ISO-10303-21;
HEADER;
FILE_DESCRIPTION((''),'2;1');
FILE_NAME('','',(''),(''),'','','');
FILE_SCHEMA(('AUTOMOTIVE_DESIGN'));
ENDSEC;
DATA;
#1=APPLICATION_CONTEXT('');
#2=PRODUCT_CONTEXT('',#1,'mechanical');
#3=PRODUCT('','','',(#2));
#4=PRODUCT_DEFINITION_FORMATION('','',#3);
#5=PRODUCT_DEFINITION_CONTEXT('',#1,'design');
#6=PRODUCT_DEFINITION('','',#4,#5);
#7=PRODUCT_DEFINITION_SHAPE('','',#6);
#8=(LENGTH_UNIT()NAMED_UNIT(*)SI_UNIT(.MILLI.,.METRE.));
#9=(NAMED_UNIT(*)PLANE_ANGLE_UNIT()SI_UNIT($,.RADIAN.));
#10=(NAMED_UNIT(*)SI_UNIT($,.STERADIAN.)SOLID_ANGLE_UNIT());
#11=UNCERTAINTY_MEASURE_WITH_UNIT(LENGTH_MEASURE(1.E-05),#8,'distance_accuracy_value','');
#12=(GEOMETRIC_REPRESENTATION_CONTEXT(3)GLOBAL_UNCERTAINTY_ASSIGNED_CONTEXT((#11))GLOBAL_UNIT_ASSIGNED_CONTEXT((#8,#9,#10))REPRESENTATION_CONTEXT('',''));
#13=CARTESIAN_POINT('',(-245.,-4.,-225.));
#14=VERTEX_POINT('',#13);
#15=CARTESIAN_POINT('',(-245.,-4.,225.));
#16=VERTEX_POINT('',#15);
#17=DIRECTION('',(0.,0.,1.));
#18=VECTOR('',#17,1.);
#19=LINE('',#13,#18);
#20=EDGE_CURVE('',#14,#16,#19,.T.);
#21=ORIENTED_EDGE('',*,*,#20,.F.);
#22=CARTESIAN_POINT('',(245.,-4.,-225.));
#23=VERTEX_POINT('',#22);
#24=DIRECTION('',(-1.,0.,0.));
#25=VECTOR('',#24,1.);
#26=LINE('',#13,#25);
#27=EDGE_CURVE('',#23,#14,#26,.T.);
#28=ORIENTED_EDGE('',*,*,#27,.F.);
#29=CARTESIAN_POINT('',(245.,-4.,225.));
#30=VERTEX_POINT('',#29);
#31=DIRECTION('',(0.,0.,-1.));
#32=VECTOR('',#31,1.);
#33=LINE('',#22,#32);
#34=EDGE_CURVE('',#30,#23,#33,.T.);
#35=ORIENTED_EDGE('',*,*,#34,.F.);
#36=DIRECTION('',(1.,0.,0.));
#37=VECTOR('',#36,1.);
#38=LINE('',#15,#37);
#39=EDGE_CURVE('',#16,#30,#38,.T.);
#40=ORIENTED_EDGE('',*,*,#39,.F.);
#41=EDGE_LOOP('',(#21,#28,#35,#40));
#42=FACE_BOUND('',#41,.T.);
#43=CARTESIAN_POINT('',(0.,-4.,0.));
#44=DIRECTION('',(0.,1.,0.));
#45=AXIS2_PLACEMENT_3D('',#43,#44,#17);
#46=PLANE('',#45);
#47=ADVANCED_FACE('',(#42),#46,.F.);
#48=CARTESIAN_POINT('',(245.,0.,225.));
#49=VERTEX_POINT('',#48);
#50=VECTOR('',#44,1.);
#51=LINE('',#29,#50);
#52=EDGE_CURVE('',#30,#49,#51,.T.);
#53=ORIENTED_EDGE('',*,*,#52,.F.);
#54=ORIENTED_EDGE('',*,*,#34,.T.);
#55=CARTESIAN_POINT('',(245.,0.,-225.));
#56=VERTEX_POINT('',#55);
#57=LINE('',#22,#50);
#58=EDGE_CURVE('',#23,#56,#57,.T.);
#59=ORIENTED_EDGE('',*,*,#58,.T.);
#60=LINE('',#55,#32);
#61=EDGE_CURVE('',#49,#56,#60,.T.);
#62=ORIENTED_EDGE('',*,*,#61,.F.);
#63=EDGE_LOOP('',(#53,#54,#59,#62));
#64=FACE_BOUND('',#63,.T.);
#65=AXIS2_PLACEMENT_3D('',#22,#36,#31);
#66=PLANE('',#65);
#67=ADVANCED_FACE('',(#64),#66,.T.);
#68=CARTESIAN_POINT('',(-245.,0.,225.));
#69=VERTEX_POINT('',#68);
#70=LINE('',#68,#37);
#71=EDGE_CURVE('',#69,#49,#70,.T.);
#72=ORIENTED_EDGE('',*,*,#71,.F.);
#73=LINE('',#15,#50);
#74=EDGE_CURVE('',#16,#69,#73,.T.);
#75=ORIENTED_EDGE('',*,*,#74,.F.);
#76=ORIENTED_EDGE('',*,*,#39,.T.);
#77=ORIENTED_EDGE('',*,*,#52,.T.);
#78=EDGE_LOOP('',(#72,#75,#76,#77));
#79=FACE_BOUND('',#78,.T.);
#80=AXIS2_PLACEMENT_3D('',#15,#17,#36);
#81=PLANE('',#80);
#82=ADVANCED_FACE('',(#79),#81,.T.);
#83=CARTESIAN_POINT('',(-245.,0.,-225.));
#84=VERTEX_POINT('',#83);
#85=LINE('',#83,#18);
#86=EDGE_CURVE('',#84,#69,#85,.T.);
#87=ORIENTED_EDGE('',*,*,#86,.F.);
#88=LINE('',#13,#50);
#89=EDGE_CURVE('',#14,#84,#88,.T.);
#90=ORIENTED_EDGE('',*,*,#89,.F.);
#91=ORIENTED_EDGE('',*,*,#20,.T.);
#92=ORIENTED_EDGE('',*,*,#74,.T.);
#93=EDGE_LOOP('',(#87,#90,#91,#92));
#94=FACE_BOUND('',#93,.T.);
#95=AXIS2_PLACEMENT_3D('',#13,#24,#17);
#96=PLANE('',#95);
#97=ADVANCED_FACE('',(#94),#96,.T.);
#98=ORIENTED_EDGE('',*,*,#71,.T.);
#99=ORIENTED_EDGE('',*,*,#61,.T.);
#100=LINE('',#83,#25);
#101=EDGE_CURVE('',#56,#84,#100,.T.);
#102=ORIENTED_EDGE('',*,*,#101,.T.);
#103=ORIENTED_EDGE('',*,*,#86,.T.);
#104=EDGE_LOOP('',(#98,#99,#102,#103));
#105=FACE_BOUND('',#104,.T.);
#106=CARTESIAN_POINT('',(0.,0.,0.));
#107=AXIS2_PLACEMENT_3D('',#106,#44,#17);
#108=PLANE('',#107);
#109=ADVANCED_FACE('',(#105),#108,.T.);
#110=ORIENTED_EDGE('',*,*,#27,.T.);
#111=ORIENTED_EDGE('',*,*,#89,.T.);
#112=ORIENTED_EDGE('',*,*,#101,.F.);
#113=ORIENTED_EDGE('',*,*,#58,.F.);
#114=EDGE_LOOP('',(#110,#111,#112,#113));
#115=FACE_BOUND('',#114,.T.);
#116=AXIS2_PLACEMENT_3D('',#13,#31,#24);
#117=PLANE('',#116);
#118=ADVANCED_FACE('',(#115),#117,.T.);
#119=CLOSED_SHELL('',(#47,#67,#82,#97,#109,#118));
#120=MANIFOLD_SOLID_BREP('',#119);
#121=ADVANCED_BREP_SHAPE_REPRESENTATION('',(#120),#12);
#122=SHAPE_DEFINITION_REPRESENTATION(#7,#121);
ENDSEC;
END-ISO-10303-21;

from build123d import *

# Parameters (mm, degrees)
SZKIC1_W               = 490
SZKIC1_H               = 450
ODGI_CIE_BAZOWE1_DEPTH = 4


# Sheet-metal steps are written as plain solids
with BuildPart() as part:
    # Szkic1 → Odgięcie bazowe1 (new body)
    with BuildSketch(Plane(origin=(0, 0, 0), x_dir=(1, 0, 0), z_dir=(0, 1, 0))):
        Rectangle(SZKIC1_W, SZKIC1_H)
    extrude(amount=-ODGI_CIE_BAZOWE1_DEPTH)


solid = part.part
